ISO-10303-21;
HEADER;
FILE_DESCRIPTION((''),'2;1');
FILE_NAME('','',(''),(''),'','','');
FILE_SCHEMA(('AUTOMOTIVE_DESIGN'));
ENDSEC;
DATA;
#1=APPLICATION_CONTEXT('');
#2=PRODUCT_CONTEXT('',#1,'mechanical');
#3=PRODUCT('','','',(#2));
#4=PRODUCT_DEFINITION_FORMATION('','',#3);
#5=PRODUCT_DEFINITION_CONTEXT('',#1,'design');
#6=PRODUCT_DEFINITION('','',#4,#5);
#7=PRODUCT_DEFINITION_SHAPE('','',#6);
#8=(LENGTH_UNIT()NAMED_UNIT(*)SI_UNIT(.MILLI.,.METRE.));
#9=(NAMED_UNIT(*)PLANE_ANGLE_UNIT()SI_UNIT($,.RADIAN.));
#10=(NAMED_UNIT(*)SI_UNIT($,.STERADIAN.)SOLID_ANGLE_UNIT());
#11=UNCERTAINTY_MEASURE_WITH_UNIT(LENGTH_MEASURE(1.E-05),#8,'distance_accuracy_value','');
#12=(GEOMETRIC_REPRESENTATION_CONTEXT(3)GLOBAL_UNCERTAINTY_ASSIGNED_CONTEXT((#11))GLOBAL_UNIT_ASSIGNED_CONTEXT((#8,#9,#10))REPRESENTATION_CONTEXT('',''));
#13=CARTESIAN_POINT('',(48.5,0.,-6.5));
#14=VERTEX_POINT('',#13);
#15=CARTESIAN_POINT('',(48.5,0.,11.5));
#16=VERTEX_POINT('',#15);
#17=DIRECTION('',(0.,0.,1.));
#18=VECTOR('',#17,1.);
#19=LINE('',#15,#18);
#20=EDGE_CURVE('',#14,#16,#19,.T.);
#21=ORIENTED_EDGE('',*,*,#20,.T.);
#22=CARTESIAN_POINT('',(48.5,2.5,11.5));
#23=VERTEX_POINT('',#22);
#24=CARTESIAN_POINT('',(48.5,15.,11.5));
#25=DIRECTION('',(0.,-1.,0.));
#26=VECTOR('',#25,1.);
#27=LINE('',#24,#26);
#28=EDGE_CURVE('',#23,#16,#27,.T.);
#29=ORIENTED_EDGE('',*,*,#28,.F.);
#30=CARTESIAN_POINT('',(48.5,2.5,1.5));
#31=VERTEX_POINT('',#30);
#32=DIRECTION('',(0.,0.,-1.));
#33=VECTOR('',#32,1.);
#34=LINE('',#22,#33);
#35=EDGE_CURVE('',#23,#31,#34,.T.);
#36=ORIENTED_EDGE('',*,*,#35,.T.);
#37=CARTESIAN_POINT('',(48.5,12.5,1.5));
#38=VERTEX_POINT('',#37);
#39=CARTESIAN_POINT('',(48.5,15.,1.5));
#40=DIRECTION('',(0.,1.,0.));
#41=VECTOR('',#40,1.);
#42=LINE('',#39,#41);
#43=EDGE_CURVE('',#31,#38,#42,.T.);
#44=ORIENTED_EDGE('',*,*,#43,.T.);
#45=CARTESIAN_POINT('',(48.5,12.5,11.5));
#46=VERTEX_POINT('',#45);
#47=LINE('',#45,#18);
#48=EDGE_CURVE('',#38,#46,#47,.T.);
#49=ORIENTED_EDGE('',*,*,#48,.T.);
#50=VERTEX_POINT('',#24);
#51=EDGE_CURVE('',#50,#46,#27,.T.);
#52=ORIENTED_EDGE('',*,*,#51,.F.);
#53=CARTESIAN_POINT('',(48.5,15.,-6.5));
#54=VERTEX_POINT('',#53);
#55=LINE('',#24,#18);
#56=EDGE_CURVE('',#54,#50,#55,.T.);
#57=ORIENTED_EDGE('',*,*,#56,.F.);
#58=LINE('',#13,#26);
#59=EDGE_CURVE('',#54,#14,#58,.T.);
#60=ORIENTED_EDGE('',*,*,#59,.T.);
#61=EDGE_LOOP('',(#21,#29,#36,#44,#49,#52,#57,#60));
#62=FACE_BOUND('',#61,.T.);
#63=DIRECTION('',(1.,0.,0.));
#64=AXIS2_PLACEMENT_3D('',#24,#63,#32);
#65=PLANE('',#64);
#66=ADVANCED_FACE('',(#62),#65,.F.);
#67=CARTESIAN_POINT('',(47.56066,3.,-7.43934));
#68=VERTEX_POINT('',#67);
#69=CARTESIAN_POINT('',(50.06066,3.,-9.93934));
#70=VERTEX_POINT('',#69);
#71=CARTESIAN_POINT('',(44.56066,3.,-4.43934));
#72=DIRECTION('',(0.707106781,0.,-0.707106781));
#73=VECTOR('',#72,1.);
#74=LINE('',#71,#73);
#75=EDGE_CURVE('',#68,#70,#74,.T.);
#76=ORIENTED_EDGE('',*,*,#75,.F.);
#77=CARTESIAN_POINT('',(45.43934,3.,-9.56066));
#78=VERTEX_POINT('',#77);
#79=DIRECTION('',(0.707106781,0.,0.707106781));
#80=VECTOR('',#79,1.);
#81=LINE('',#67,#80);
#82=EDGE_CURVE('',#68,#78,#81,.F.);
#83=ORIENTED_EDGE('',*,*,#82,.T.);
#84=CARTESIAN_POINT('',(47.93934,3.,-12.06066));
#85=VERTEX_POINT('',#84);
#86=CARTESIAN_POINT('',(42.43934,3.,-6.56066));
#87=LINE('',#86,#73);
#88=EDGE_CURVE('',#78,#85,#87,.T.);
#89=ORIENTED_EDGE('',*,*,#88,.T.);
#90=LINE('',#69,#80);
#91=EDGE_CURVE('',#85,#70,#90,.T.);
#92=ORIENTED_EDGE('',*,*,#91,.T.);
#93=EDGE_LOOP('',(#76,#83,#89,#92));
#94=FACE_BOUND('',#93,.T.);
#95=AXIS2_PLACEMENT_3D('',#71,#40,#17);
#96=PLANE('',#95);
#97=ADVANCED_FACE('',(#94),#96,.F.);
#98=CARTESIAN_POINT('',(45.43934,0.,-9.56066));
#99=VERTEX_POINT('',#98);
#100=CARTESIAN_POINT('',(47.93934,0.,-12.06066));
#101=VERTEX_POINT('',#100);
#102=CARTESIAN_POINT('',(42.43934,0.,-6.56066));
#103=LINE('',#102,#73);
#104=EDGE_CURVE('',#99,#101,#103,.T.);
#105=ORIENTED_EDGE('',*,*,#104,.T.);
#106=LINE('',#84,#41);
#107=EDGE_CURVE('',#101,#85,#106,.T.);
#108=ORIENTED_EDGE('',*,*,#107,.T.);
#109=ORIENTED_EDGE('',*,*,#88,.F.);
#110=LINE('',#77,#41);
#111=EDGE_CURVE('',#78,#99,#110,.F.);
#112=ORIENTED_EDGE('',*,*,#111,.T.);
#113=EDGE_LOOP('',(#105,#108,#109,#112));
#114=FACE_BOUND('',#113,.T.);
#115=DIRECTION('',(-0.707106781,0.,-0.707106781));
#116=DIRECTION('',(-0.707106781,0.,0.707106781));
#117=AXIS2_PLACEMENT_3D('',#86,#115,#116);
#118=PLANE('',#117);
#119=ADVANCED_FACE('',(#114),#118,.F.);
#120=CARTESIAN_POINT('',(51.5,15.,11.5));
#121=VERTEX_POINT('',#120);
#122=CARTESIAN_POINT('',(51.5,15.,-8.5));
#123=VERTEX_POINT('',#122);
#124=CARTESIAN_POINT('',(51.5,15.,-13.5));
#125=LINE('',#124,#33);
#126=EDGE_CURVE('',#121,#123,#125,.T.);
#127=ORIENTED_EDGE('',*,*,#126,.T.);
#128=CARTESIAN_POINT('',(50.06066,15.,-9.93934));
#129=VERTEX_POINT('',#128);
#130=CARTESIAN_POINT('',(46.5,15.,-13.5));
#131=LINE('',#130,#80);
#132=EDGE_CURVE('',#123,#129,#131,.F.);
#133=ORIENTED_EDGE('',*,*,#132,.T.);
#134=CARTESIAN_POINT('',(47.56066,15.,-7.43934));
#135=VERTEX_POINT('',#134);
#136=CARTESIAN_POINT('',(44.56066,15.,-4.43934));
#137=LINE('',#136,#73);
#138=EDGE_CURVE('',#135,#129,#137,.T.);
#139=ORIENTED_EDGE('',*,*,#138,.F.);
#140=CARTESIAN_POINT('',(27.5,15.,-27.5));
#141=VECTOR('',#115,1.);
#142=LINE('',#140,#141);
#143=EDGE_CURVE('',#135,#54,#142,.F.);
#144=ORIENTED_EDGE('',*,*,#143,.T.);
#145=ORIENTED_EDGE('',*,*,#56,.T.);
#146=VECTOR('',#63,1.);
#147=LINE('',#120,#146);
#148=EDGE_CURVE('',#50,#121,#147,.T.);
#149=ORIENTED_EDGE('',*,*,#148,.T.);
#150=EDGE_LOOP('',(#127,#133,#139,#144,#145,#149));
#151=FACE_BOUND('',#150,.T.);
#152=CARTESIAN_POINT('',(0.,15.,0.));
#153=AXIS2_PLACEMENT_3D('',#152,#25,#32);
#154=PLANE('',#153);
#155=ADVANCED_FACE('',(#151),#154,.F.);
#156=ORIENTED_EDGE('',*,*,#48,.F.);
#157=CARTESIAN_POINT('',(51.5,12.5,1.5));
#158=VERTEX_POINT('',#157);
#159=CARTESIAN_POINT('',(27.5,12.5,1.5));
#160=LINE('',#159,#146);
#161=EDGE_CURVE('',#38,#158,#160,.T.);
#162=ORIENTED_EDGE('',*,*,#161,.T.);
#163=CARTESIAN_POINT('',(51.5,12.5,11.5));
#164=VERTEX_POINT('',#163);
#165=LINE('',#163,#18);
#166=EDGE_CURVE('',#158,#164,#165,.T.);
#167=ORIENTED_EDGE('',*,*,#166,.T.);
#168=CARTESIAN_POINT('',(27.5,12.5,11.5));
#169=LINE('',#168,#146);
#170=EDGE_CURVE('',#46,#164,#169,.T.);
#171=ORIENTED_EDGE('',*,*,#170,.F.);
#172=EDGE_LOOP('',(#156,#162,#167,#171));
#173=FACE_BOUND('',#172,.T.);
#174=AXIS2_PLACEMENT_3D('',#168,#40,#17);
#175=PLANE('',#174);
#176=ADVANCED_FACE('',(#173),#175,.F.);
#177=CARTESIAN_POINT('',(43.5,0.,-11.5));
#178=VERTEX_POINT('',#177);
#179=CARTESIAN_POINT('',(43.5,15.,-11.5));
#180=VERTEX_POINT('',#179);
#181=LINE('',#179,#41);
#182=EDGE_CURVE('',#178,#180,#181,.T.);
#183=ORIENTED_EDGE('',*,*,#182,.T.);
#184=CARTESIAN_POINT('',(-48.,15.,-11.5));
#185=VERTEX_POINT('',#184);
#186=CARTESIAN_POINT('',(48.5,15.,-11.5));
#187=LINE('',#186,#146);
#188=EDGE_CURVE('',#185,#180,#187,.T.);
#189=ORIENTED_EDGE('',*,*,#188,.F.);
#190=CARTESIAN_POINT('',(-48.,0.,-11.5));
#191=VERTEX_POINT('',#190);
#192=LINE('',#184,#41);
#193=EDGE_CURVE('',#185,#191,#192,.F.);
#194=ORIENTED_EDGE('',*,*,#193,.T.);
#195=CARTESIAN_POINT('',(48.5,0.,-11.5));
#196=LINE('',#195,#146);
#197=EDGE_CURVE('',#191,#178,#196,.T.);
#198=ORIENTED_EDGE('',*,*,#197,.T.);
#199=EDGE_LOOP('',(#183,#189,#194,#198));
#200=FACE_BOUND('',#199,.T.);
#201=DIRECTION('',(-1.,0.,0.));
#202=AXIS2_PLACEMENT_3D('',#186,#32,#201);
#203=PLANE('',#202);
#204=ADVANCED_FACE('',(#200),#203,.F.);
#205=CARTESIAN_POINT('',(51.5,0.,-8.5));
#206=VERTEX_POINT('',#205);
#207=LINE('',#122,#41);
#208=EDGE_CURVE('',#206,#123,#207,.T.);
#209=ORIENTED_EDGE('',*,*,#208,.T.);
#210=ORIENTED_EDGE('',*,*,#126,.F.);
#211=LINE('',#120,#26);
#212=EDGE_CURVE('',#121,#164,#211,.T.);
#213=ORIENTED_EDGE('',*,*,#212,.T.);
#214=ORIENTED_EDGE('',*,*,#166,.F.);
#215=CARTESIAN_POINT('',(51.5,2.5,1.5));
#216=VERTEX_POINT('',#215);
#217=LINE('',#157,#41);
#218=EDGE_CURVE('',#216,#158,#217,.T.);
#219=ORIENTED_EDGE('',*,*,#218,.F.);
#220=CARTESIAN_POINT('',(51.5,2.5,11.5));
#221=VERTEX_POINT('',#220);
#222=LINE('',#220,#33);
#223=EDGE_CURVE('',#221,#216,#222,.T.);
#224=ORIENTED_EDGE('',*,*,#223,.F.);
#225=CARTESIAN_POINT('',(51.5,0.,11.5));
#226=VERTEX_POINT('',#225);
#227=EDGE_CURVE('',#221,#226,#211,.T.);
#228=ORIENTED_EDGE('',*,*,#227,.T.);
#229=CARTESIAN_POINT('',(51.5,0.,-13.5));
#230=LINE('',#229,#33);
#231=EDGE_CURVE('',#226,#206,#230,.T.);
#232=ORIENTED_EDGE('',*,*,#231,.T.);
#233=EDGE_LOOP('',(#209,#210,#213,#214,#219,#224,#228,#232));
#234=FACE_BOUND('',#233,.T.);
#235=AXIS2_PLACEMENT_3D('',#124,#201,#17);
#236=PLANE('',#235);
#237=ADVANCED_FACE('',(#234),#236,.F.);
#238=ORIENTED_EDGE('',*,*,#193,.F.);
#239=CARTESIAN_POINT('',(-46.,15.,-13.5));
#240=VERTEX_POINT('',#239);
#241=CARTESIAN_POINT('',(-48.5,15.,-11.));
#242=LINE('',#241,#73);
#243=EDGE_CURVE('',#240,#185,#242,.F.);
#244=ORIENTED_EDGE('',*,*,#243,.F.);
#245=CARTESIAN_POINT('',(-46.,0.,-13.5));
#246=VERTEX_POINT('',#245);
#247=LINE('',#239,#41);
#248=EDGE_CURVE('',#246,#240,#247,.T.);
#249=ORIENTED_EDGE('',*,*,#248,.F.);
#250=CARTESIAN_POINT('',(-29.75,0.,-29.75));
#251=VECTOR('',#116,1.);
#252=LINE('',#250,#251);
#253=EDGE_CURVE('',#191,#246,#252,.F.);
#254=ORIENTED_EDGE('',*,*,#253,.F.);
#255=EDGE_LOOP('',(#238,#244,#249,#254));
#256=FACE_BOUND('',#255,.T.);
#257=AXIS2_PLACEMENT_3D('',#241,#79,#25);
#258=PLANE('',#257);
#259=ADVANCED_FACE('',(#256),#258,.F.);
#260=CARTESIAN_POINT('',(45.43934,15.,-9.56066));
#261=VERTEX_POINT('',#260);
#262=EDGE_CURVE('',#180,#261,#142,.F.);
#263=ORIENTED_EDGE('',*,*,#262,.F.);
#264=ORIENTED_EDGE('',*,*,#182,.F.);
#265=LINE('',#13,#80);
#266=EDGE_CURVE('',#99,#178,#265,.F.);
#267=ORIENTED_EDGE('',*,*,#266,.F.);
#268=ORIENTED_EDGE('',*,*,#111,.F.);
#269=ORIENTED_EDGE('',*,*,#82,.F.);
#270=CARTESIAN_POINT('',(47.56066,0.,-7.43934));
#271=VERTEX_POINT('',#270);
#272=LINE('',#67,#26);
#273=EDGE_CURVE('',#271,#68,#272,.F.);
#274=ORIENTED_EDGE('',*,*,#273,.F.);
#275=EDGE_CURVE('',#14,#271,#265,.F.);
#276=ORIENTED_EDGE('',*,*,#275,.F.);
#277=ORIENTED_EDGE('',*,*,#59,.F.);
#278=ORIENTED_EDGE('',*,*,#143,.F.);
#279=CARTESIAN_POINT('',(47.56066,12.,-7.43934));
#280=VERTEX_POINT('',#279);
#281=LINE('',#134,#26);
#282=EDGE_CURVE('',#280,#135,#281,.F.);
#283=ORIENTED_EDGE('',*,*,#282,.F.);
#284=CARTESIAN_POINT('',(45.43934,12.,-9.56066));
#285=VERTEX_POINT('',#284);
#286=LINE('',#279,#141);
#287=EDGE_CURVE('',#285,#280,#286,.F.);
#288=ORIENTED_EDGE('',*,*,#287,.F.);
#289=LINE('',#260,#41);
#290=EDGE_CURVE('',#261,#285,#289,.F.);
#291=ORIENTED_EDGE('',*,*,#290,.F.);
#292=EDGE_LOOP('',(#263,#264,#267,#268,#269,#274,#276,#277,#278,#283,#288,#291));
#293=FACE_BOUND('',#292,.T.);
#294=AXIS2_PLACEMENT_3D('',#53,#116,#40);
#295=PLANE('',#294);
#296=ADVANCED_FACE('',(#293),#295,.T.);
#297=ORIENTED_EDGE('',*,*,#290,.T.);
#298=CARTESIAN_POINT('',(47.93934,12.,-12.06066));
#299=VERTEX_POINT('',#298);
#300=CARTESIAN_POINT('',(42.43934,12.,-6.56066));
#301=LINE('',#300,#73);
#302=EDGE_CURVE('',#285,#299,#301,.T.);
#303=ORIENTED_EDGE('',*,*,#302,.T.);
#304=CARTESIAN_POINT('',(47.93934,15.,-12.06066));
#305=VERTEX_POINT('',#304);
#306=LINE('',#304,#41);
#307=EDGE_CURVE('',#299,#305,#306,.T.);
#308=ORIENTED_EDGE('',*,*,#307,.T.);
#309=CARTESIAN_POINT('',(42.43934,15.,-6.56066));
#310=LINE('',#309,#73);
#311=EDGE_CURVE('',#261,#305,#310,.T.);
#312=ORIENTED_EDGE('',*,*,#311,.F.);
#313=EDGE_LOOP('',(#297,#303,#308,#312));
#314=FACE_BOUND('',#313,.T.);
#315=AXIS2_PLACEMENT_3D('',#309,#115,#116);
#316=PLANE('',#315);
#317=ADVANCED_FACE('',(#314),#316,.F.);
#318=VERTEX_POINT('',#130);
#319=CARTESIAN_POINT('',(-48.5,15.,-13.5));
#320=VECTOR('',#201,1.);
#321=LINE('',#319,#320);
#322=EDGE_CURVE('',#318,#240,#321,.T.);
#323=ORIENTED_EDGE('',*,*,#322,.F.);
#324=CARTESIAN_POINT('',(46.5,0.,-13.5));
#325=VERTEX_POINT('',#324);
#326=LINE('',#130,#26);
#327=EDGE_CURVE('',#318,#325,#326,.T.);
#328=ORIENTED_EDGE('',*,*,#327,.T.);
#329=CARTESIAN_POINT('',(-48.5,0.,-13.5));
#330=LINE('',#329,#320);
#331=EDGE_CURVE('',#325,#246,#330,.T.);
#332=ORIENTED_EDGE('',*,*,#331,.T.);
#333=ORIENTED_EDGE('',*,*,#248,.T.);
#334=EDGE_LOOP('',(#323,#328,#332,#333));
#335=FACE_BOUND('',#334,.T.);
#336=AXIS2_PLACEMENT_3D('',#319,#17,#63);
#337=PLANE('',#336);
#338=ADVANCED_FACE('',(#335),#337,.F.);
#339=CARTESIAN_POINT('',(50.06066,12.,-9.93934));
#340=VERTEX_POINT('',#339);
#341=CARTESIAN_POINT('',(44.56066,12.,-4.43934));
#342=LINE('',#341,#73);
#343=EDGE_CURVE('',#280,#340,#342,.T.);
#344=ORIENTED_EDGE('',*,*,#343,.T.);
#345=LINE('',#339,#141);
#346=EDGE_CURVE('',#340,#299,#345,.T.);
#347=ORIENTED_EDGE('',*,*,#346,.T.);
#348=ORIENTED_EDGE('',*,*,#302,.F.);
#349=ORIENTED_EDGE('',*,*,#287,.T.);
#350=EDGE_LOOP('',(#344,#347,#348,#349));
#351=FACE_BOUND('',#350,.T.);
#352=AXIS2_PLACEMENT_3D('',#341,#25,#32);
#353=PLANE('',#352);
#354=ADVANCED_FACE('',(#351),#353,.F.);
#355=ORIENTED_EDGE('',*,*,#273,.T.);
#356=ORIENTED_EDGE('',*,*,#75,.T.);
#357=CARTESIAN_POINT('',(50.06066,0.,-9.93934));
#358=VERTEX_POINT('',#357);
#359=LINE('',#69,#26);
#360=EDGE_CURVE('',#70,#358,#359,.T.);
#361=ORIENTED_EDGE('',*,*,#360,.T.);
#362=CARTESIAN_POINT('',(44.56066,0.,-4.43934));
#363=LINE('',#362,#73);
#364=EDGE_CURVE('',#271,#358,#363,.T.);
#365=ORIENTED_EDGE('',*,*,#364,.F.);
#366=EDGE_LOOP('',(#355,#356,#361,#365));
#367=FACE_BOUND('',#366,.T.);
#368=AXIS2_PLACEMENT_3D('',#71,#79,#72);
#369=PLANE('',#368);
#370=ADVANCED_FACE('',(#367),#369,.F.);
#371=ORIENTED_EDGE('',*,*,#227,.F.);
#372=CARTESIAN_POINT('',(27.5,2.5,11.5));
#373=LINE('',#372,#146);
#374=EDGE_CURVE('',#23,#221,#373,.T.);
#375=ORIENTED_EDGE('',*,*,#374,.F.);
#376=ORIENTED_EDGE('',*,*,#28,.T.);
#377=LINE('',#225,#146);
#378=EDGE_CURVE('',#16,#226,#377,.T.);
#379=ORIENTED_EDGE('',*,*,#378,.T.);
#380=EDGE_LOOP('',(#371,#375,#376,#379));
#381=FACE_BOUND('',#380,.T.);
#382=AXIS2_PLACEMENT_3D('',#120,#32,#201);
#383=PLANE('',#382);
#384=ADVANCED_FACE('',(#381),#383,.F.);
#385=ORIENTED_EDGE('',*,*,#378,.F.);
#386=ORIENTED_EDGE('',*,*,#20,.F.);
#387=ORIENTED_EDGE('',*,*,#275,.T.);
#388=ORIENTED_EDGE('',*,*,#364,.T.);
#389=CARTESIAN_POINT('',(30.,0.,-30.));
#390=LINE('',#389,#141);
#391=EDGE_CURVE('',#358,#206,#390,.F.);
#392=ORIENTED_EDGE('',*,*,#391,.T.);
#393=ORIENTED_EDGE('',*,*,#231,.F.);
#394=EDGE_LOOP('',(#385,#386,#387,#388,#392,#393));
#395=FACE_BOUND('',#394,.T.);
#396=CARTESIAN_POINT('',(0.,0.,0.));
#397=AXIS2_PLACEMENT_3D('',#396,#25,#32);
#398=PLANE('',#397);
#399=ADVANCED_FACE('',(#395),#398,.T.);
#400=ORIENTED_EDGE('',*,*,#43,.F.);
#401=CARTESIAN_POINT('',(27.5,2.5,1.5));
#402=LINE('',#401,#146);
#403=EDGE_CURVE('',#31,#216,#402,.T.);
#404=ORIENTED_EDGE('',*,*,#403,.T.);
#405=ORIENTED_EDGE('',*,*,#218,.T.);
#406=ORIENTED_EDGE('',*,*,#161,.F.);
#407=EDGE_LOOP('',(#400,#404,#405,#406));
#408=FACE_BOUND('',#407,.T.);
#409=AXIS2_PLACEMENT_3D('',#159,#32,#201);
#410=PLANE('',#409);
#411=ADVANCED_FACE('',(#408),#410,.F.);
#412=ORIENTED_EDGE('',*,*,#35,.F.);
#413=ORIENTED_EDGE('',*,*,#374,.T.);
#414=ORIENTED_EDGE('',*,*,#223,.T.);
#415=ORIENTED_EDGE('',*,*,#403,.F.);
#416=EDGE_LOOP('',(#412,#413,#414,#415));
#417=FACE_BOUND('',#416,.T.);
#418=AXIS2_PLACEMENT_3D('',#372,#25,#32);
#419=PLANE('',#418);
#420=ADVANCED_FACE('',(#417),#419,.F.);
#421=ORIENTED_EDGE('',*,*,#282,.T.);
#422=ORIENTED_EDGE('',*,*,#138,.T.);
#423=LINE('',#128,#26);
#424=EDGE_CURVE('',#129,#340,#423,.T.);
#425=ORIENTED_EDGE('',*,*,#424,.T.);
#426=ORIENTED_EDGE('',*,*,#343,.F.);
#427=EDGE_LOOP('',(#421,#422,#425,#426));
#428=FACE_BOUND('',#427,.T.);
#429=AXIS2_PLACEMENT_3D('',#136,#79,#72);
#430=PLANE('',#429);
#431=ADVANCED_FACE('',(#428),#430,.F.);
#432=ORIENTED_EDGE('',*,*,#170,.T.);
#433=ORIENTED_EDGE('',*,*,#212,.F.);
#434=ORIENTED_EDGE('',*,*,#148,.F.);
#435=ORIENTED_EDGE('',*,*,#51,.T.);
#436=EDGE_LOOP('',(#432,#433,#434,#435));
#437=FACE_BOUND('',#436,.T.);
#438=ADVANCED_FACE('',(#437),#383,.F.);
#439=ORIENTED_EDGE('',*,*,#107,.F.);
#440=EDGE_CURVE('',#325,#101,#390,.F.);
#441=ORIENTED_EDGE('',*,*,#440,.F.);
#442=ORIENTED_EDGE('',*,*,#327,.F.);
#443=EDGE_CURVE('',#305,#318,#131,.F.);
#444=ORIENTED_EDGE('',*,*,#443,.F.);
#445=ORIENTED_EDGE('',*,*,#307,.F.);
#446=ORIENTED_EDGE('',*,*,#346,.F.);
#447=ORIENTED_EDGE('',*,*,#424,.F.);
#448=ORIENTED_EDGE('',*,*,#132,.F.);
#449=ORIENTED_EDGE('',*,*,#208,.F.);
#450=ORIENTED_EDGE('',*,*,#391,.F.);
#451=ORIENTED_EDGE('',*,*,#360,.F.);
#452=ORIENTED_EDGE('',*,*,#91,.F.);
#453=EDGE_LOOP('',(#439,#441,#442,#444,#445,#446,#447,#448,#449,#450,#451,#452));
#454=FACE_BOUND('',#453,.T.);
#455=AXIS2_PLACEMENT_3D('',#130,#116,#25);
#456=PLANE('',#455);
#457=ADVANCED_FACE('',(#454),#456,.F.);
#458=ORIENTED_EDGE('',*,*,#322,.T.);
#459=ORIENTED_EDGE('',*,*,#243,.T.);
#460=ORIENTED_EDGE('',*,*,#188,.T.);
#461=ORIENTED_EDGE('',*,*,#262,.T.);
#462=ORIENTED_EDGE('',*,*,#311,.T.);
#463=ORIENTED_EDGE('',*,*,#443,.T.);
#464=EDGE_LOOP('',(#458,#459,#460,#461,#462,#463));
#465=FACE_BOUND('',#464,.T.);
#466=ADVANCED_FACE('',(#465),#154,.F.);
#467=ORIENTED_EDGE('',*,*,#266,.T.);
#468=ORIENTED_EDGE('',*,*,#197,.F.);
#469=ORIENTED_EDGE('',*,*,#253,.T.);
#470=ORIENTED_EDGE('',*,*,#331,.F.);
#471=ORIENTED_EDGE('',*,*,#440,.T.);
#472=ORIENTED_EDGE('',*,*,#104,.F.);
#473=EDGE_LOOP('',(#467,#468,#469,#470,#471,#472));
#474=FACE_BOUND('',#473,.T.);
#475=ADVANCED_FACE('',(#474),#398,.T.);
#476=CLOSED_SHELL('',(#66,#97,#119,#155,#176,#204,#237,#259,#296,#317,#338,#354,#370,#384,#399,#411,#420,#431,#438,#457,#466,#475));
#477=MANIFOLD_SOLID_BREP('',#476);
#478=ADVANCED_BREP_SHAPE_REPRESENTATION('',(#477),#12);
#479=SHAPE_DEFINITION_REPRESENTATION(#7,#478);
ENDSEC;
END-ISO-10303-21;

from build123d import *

# Parameters (mm, degrees)
BOSS_EXTRUDE1_DEPTH = 15
CHAMFER1_SIZE       = 5
SKETCH3_W           = 10
SKETCH3_H           = 10
CUT_EXTRUDE1_DEPTH  = 24
CHAMFER2_SIZE       = 2.5
SKETCH4_W           = 3
SKETCH4_H           = 3
CUT_EXTRUDE2_DEPTH  = 3.535533906


with BuildPart() as part:
    # Sketch1 → Boss-Extrude1 (new body)
    with BuildSketch(Plane(origin=(0, 0, 0), x_dir=(1, 0, 0), z_dir=(0, 1, 0))):
        Polygon((-48.5, 13.5), (51.5, 13.5), (51.5, -11.5), (48.5, -11.5), (48.5, 11.5), (-48.5, 11.5), align=None)
    extrude(amount=BOSS_EXTRUDE1_DEPTH)

    # Chamfer1
    chamfer1_edges = [part.edges().sort_by_distance(p)[0] for p in [
        (51.5, 7.5, -13.5),
        (48.5, 7.5, -11.5),
    ]]
    chamfer(chamfer1_edges, length=CHAMFER1_SIZE)

    # Sketch3 → Cut-Extrude1 (cut)
    with BuildSketch(Plane(origin=(51.5, 0, 0), x_dir=(0, 0, -1), z_dir=(1, 0, 0))):
        with Locations((-6.5, 7.5)):
            Rectangle(SKETCH3_W, SKETCH3_H)
    extrude(amount=-CUT_EXTRUDE1_DEPTH, mode=Mode.SUBTRACT)

    # Chamfer2
    # the kernel refuses this chamfer: 2.5 mm, written as the material it takes off along each edge
    with BuildSketch(Plane(origin=(-48.5, -6.42920747, -13.5), x_dir=(0.9996219169112968, 0, -0.027495876610586282), z_dir=(0, 1, 0))) as chamfer2_piece_1:
        Polygon((CHAMFER2_SIZE * 0.999621916911, -CHAMFER2_SIZE * 0.0274958766106), (-CHAMFER2_SIZE * 0.0274958766106, -CHAMFER2_SIZE * 0.999621916911), (0, 0), align=None)
    extrude(amount=27.85841494, mode=Mode.SUBTRACT)

    # Sketch4 → Cut-Extrude2 (cut)
    with BuildSketch(Plane(origin=(30, 0, -30), x_dir=(-0.7071067811865442, 0, -0.7071067811865509), z_dir=(0.7071067811865509, 0, -0.7071067811865442))):
        with Locations((-26.870057685, 1.5)):
            Rectangle(SKETCH4_W, SKETCH4_H)
        with Locations((-26.870057685, 13.5)):
            Rectangle(SKETCH4_W, SKETCH4_H)
    extrude(amount=-CUT_EXTRUDE2_DEPTH, mode=Mode.SUBTRACT)


solid = part.part
